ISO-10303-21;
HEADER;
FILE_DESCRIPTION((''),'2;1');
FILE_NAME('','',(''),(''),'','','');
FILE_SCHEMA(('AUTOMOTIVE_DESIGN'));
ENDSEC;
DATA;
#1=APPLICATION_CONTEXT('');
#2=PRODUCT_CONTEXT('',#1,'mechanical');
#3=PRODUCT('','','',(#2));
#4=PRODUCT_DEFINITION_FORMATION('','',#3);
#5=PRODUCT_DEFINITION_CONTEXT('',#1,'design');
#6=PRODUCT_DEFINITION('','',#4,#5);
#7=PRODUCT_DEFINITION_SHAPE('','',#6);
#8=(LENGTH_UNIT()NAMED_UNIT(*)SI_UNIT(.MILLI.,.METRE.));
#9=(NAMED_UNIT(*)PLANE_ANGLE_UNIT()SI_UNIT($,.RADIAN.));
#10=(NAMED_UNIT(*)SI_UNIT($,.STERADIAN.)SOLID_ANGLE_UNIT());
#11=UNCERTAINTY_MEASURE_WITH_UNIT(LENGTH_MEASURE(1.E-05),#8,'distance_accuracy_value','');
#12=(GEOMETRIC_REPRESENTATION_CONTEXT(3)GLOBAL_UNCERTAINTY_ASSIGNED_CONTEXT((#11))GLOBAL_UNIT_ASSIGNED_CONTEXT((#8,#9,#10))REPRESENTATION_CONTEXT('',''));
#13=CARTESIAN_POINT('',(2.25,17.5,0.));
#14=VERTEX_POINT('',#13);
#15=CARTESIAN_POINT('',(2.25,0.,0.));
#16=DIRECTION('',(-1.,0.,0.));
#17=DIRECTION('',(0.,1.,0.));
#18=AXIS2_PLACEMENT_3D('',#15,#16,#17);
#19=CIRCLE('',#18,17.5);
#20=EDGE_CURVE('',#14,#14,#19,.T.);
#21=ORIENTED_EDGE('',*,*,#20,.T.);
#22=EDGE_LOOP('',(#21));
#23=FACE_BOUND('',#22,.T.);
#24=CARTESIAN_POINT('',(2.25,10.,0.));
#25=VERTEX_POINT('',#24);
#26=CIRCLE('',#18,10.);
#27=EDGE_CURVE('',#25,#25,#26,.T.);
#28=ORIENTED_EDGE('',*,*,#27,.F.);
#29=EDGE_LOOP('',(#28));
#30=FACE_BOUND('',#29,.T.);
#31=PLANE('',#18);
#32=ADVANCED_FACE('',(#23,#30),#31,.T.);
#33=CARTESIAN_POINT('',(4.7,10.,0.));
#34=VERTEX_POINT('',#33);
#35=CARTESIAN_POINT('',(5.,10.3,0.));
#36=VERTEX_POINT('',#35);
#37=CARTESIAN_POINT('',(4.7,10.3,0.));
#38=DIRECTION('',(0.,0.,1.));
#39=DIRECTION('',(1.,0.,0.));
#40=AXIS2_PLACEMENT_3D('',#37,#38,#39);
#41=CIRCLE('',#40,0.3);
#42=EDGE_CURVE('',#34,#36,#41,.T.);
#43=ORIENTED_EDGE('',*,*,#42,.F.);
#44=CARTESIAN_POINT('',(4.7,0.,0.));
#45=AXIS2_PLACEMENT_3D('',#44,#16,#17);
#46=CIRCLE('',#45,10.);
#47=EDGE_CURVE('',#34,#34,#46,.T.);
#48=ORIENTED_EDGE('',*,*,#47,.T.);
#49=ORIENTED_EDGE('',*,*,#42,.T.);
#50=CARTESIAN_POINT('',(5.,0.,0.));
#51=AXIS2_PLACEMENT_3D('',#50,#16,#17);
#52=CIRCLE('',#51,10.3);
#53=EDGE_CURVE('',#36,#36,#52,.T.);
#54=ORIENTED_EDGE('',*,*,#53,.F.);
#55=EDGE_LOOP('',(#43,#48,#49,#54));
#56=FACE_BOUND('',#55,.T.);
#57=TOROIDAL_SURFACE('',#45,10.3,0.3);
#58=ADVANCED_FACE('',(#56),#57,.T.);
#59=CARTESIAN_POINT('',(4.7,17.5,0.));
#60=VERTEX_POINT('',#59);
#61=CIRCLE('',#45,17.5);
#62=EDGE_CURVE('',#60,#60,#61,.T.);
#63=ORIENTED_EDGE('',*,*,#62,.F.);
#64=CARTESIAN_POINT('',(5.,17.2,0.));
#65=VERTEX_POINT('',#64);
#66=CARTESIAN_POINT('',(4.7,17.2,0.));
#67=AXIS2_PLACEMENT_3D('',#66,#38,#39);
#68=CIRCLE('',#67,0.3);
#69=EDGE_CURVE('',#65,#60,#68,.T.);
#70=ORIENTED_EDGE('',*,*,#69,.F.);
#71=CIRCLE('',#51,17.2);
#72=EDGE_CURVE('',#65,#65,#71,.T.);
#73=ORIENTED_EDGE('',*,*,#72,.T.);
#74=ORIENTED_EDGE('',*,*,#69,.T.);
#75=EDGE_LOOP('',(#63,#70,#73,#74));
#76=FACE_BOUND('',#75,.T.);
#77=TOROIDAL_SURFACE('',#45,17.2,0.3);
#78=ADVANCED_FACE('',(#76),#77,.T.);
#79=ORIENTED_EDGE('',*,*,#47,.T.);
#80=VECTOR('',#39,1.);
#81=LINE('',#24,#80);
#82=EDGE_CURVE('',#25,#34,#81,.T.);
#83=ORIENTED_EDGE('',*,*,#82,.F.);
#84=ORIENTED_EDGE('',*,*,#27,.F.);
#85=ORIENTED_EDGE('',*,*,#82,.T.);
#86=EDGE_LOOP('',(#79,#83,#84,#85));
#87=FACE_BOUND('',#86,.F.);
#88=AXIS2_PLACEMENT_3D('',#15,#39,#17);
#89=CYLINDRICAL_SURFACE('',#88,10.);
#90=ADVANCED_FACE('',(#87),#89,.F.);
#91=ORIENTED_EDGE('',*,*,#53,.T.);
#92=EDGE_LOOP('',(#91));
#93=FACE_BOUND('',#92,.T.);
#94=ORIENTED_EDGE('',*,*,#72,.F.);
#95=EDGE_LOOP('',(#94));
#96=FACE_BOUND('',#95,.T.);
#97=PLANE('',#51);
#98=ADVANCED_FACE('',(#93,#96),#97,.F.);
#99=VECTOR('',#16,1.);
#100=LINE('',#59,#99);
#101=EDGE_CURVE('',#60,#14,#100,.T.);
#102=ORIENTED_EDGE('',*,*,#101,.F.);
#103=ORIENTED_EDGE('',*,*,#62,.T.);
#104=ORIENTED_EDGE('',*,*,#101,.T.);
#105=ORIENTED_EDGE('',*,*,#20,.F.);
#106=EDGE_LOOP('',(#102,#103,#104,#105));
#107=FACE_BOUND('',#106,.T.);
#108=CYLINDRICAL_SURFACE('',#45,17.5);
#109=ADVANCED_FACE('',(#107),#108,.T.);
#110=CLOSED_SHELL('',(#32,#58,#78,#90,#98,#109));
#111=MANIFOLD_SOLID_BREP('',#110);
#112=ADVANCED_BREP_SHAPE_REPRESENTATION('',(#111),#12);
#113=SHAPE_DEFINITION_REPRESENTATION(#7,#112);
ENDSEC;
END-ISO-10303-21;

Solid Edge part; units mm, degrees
sketch "Sketch1" plane through (0, 0, 0) normal (0, 0, 1) x (1, 0, 0)
  line L0 (2.25, 17.5) -> (2.25, 10)
  line L1 (2.25, 10) -> (4.7, 10)
  arc A0 (4.7, 10) -> (5, 10.3) centre (4.7, 10.3) ccw
  line L2 (5, 10.3) -> (5, 17.2)
  arc A1 (5, 17.2) -> (4.7, 17.5) centre (4.7, 17.2) ccw
  line L3 (4.7, 17.5) -> (2.25, 17.5)
revolve "RevolvedProtrusion1" add sketch "Sketch1" angle 360 about axis through (5, 0, 0) along (-1, 0, 0)
properties part number "SKF_81104 TN_PART3"
